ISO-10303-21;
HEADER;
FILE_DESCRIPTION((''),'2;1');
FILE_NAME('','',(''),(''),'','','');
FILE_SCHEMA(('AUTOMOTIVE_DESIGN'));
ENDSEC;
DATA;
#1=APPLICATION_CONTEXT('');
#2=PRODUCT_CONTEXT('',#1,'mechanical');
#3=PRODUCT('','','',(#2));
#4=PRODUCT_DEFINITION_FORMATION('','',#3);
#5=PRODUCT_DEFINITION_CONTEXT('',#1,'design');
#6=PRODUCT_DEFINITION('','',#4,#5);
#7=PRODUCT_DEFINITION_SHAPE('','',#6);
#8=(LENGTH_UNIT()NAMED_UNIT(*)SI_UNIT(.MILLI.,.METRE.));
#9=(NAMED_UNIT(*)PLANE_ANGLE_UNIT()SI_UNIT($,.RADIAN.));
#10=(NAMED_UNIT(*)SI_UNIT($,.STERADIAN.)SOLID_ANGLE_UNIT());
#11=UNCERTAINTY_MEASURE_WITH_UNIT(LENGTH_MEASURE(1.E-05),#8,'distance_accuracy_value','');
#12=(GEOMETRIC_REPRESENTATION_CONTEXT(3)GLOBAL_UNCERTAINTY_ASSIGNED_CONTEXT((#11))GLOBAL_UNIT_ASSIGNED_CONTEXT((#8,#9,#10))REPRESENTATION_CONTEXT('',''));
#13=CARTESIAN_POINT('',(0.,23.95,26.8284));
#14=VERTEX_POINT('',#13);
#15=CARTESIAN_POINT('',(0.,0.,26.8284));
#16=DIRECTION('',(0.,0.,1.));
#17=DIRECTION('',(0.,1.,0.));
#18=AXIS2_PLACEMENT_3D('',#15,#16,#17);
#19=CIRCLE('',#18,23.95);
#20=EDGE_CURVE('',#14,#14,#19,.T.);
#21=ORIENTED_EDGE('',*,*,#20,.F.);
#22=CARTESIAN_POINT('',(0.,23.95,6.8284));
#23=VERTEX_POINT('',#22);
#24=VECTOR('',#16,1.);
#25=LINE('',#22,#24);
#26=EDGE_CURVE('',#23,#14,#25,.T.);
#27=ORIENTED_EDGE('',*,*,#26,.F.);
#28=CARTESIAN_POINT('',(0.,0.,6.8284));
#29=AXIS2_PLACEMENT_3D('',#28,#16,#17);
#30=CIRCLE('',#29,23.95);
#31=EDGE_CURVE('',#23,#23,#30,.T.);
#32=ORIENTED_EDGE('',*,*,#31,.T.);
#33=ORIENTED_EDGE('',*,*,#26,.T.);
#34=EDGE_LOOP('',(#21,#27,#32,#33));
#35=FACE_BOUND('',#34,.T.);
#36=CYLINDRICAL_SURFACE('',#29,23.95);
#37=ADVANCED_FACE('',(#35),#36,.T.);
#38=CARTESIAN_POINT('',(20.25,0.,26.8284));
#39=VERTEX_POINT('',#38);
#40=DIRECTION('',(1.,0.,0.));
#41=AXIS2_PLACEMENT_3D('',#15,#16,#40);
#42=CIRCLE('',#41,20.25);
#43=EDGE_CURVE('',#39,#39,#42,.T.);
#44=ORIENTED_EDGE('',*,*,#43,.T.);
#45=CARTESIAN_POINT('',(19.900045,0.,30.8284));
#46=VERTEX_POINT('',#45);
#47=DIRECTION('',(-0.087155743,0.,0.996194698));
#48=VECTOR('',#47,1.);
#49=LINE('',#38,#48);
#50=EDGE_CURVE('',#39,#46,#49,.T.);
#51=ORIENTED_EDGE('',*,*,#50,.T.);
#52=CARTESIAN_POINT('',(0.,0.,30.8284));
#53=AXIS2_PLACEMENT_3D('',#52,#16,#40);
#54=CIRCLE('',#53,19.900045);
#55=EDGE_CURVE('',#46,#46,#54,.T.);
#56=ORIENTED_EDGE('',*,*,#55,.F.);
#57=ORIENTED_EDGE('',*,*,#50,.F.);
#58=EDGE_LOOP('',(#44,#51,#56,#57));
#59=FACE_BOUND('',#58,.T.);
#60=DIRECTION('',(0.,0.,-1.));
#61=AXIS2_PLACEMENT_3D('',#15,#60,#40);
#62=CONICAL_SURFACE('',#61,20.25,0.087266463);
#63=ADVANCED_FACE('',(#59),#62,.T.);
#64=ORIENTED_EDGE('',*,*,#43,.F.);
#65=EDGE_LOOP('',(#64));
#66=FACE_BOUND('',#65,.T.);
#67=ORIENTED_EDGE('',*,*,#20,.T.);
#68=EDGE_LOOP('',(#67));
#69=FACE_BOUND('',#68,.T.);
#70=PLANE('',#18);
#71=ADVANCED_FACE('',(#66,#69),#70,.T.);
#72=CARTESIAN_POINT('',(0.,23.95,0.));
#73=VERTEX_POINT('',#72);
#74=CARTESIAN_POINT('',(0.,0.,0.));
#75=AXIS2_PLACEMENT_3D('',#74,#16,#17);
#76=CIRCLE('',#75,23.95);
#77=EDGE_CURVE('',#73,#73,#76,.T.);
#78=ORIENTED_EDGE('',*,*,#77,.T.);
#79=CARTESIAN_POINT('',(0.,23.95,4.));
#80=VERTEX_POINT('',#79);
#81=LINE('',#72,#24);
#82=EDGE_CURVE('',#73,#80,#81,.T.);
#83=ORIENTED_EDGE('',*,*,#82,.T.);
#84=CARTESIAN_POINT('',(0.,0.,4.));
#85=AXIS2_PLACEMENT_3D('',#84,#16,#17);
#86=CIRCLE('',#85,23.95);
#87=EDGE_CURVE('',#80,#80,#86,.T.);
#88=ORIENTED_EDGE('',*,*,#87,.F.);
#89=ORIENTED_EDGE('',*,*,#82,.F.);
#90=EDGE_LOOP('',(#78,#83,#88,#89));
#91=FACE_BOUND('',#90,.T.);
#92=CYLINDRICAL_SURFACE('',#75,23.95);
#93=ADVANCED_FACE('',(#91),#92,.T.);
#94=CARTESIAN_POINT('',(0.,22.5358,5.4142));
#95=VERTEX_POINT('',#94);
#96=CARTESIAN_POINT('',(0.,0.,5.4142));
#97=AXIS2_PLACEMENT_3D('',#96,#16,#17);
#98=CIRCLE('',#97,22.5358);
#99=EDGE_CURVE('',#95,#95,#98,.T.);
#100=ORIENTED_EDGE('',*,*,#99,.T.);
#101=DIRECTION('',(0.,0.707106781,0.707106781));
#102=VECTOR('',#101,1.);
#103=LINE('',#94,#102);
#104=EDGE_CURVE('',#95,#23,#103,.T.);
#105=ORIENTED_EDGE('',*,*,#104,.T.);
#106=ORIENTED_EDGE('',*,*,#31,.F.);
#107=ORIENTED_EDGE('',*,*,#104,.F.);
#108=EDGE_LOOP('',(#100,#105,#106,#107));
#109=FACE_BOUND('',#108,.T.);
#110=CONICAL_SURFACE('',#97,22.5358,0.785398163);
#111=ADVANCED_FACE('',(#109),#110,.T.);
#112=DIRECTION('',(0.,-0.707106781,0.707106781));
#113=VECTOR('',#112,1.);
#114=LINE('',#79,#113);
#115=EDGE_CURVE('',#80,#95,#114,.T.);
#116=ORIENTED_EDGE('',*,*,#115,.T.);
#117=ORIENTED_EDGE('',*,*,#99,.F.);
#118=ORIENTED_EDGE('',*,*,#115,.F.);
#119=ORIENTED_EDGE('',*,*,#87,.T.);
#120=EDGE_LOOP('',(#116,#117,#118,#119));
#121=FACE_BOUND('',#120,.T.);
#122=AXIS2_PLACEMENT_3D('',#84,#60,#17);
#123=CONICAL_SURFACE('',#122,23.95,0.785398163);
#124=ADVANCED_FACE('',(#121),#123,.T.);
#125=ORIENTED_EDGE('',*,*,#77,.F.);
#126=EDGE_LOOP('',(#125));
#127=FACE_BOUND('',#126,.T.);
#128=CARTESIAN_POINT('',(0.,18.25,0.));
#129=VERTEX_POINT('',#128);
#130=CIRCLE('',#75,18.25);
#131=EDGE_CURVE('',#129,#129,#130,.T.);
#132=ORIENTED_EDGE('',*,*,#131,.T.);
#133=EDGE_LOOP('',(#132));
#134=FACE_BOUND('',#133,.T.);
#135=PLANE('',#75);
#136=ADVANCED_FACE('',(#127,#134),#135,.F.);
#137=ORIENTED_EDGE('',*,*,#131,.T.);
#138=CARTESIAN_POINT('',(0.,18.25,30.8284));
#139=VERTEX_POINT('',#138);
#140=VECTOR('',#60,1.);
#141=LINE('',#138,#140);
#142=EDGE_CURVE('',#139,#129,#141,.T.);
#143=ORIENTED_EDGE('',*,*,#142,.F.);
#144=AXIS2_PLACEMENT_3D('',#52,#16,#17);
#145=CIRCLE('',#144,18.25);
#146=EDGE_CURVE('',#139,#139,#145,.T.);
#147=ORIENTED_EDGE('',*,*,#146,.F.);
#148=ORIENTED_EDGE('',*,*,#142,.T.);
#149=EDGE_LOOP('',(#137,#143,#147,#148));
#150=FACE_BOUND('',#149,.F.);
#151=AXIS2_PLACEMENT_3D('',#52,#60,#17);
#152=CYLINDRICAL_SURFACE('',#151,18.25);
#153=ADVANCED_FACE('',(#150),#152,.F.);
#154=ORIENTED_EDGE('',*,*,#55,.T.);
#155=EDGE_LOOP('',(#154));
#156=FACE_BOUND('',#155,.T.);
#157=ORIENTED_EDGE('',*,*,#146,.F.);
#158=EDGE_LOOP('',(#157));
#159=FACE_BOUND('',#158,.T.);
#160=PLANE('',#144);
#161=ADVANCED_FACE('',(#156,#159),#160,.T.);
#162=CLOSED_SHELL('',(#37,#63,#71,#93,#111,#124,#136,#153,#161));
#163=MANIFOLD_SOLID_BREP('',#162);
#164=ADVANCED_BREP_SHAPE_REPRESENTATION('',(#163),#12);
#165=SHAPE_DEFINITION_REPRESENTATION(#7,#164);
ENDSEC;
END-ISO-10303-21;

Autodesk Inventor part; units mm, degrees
ref_plane "YZ Plane" through (0, 0, 0) normal (1, 0, 0) x (0, 1, 0)
ref_plane "XZ Plane" through (0, 0, 0) normal (0, 1, 0) x (-1, 0, 0)
ref_plane "XY Plane" through (0, 0, 0) normal (0, 0, 1) x (1, 0, 0)
sketch "Skizze1" plane through (0, 0, 0) normal (1, 0, 0) x (0, 1, 0)
  line L0 (23.95, 0) -> (23.95, 4)
  line L1 (23.95, 4) -> (22.5358, 5.4142)
  line L2 (22.5358, 5.4142) -> (23.95, 6.8284)
  line L3 (23.95, 6.8284) -> (23.95, 26.8284)
  line L4 (23.95, 26.8284) -> (20.25, 26.8284)
  line L5 (20.25, 26.8284) -> (20.25, 30.8284)
  line L6 (20.25, 30.8284) -> (18.25, 30.8284)
  line L7 (18.25, 30.8284) -> (18.25, 0)
  line L8 (18.25, 0) -> (23.95, 0)
  line L9 (0, -6.1657) -> (0, 36.9941) projected
  point P0 (0, 0)
  dimension "d0" = 4
  dimension "d1" = 2
  dimension "d2" = 135
  dimension "d3" = 20
  dimension "d4" = 23.95
  dimension "d5" = 20.25
  dimension "d6" = 4
  dimension "d7" = 2
revolve "Umdrehung1" add sketch "Skizze1" angle 360 about axis through (0, 0, -10) along (0, 0, 1)
sketch "Skizze2" plane through (0, 0, 26.8284) normal (0, 0, 1) x (1, 0, 0)
  circle A0 centre (0, 0) radius 20.25 projected
  circle A1 centre (0, 0) radius 23.95 projected
extrude "Extrusion1" cut sketch "Skizze2" along normal up to surface (4 mm away) draft 5
properties part number "00_microscope_turret"
